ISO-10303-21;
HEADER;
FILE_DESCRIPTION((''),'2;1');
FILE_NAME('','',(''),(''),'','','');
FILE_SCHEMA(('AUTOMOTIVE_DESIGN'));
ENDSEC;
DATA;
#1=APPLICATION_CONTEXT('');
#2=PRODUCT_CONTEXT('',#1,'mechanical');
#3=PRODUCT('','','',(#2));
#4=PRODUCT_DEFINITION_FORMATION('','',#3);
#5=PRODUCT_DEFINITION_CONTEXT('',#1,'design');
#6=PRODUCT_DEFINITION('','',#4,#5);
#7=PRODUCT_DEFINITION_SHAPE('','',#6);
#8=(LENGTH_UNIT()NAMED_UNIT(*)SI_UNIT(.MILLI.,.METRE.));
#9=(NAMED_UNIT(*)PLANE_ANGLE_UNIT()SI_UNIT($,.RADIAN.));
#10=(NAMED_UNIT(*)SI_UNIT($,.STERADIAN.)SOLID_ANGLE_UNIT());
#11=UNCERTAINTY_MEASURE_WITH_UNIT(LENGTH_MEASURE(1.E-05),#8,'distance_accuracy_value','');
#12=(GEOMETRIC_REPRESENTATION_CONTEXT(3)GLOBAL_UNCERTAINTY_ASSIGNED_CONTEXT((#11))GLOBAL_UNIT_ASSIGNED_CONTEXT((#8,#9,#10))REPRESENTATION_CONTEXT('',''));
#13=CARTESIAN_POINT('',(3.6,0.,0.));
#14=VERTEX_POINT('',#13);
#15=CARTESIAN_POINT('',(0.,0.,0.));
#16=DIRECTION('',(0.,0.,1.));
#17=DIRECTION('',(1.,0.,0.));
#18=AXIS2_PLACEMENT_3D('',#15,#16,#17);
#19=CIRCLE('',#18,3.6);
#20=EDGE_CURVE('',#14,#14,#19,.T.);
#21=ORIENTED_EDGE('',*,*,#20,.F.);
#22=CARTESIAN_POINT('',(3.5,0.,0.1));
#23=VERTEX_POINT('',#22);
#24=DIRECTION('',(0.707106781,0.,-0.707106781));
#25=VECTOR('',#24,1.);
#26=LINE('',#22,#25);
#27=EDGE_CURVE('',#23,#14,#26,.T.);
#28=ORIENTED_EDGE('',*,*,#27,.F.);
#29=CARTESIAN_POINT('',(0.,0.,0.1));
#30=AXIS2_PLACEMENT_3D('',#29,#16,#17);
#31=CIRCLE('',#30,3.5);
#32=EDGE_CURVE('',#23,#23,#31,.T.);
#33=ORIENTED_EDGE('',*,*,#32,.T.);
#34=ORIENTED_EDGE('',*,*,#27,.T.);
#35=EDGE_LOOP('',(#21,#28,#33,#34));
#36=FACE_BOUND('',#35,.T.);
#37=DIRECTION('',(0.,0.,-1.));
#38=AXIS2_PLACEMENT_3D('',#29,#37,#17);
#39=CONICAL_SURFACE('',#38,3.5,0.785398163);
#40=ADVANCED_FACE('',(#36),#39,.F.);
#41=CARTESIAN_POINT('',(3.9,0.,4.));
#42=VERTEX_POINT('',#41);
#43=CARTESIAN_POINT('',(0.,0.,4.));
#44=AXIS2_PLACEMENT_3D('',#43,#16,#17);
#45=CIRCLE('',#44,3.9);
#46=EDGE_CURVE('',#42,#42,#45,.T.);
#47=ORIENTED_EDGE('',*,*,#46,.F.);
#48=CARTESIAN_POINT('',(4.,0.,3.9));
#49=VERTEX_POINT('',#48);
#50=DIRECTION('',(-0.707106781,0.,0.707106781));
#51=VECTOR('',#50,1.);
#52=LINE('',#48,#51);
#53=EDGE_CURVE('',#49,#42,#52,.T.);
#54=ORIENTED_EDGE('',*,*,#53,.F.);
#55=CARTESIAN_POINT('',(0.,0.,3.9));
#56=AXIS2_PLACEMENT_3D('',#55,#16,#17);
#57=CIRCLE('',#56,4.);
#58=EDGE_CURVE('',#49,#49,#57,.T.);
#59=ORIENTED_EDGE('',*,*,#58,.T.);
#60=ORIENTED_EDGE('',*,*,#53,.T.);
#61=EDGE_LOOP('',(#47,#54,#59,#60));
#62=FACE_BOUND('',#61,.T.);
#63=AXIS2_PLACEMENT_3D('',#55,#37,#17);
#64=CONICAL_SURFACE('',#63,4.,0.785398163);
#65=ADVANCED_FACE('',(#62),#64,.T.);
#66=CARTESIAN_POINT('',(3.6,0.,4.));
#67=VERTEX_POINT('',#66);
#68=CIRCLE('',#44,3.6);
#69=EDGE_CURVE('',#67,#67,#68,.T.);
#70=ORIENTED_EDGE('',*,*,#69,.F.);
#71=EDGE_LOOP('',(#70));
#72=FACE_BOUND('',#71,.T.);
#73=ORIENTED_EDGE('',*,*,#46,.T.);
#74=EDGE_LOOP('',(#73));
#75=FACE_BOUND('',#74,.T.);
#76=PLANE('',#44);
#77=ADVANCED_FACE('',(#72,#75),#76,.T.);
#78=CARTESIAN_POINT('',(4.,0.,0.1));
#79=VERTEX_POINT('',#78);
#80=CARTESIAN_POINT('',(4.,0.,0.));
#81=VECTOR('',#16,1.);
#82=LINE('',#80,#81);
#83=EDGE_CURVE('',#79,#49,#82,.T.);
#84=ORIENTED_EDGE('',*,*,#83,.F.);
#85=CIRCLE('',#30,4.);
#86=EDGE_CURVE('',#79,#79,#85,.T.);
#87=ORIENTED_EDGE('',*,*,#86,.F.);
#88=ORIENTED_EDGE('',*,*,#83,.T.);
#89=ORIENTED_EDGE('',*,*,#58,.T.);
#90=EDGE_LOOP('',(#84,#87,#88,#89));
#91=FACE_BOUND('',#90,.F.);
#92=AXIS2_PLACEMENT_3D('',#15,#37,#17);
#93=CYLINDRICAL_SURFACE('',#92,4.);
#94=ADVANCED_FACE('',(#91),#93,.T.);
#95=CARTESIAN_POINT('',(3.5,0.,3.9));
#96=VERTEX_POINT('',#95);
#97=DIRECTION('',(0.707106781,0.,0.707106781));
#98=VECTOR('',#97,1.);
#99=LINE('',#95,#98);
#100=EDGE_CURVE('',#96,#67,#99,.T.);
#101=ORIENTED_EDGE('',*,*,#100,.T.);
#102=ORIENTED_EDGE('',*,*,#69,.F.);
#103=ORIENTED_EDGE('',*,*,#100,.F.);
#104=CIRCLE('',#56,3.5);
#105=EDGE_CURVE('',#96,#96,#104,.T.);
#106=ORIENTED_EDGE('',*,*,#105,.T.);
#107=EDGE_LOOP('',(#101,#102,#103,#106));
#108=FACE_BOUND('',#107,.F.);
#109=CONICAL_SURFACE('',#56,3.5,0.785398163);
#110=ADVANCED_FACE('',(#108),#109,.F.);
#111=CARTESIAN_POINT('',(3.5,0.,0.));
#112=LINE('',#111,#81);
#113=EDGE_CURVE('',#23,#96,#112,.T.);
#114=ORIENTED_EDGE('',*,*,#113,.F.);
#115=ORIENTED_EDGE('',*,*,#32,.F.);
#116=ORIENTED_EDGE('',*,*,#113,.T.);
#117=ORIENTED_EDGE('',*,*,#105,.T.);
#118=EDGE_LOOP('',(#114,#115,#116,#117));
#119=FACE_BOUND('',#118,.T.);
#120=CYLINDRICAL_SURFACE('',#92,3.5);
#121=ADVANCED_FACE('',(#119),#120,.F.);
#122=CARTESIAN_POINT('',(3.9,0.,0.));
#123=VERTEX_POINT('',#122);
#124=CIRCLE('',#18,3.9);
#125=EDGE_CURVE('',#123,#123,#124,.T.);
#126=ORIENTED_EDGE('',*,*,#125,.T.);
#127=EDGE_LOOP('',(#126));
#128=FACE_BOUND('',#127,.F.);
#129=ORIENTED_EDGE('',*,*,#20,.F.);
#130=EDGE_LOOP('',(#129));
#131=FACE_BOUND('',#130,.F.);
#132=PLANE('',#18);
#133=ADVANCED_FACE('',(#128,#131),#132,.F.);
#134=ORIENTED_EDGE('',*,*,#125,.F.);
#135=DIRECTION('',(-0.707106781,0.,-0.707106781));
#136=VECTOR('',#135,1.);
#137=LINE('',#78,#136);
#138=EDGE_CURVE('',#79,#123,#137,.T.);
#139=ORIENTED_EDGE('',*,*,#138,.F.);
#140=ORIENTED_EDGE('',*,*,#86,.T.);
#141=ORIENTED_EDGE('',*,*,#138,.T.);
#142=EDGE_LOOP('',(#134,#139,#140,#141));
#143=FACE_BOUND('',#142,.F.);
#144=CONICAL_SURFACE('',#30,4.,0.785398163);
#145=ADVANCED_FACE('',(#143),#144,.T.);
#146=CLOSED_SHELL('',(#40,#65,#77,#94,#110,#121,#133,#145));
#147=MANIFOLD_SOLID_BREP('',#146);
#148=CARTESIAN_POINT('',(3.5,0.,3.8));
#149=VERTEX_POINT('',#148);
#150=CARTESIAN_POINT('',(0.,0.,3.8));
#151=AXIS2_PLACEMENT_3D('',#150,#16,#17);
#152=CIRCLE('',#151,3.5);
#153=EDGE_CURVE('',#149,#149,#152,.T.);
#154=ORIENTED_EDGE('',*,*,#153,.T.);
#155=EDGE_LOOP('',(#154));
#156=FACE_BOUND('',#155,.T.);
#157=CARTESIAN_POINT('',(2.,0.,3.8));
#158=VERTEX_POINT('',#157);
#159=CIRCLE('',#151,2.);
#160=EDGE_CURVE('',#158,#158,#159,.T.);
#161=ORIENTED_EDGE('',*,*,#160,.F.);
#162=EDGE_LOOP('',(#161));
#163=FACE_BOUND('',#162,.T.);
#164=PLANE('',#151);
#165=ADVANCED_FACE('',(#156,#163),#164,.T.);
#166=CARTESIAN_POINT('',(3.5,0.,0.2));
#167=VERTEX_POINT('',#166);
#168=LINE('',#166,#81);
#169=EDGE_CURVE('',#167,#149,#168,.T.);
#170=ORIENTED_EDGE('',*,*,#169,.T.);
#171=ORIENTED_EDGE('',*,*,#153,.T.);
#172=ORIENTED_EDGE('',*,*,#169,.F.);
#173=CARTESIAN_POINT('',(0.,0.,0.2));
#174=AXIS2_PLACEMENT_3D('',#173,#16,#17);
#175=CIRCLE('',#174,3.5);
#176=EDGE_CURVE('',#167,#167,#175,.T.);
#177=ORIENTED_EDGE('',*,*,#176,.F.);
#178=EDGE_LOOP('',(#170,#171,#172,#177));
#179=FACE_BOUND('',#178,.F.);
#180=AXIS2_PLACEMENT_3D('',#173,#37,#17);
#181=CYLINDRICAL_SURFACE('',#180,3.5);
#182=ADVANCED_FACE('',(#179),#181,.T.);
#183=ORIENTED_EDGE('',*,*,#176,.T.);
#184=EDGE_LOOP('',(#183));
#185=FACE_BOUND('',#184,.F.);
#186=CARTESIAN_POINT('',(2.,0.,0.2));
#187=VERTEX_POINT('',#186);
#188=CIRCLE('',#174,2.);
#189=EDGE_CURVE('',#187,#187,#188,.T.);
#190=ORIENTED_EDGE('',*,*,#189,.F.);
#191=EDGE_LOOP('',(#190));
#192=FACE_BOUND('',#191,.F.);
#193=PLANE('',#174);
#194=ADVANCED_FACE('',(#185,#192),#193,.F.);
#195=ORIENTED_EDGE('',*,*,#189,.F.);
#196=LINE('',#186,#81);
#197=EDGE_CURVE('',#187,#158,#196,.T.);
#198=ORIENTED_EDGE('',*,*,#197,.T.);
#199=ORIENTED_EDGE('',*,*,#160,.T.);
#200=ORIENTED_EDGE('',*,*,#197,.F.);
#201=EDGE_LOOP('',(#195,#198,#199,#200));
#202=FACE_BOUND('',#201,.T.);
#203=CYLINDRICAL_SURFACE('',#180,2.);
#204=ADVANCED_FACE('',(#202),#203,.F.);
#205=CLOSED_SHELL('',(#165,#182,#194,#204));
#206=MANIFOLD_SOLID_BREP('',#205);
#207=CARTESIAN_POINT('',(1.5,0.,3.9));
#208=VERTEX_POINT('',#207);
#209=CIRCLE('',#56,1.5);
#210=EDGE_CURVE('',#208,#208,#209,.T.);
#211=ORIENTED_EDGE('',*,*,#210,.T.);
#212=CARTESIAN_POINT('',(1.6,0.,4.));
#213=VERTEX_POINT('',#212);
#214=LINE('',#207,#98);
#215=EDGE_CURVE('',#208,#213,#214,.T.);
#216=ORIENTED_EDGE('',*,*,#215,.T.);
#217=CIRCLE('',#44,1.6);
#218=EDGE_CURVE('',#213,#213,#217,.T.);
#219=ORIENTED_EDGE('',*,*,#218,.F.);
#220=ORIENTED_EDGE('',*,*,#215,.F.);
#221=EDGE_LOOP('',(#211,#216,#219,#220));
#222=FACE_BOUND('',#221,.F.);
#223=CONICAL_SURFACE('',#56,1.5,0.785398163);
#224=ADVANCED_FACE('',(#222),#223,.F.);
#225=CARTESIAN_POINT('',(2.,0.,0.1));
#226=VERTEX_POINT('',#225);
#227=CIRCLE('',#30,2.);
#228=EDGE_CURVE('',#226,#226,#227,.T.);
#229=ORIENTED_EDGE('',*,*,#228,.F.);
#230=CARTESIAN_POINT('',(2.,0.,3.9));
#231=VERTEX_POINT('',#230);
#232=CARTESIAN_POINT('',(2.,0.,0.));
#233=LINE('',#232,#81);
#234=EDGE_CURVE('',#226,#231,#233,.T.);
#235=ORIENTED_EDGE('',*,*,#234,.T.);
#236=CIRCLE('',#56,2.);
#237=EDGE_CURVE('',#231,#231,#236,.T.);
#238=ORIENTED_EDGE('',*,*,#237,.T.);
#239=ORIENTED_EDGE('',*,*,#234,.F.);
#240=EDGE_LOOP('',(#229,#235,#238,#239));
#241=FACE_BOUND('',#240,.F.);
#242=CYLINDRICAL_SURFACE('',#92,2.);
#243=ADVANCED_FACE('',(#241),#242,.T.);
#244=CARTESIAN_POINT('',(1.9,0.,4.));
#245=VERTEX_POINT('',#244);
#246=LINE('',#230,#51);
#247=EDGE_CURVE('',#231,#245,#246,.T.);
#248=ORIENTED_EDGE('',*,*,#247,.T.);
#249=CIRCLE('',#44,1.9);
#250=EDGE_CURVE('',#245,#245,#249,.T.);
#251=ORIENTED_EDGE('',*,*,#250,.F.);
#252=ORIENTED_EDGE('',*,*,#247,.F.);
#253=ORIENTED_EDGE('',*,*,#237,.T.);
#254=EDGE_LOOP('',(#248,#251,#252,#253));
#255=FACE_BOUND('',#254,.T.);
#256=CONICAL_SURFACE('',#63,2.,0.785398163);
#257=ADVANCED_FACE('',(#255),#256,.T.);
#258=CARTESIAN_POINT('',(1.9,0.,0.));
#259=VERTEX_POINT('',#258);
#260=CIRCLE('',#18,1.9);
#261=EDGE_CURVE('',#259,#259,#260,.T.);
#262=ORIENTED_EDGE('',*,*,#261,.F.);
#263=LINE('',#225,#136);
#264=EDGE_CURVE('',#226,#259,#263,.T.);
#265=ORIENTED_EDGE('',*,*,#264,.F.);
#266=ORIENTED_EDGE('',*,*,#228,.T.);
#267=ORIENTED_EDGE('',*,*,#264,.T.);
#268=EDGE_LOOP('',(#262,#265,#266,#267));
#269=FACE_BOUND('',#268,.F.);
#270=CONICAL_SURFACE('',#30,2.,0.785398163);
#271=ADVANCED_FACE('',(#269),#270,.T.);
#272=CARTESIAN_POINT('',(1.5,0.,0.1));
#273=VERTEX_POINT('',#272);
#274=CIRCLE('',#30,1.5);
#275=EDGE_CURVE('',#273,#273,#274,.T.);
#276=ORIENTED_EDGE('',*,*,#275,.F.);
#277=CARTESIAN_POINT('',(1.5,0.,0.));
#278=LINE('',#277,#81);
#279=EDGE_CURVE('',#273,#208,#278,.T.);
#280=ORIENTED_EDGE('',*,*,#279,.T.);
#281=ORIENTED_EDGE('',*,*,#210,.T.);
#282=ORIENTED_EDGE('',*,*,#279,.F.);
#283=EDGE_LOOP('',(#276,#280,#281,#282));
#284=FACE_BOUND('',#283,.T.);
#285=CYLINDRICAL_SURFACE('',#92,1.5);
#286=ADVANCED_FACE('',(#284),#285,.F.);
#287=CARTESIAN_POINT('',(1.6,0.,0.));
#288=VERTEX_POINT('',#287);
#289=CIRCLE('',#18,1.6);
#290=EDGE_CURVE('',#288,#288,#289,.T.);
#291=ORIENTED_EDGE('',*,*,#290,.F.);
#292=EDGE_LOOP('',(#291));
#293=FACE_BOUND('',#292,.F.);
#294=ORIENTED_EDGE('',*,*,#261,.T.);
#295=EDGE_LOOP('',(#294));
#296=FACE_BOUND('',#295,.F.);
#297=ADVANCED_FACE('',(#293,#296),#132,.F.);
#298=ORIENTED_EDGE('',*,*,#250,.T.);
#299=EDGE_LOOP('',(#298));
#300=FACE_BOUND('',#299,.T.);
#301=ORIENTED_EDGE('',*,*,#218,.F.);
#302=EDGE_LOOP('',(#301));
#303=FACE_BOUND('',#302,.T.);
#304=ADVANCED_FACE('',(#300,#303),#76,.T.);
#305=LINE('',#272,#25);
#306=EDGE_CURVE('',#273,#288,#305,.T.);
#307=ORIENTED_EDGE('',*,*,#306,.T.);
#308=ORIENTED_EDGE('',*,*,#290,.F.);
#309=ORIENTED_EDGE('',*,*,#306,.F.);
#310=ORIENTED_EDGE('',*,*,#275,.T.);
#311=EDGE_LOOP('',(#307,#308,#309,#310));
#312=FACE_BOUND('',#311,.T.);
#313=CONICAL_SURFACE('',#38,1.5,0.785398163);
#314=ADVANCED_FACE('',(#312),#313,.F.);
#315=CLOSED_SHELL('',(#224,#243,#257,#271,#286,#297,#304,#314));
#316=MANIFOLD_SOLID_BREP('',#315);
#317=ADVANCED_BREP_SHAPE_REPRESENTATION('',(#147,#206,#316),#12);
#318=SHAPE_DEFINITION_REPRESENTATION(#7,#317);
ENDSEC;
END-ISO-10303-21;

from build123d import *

# Parameters (mm, degrees)
F0_R      = 2
F0_R_2    = 1.5
F1_DEPTH  = 4
F0_R_3    = 4
F0_R_4    = 3.5
F2_START  = 0.2
F2_DEPTH  = 3.6
F3_SIZE   = 0.1
F3_2_SIZE = 0.1


with BuildPart() as f1:
    # F0 (on Top) → F1 (new body)
    with BuildSketch(Plane.XY):
        Circle(F0_R)
        Circle(F0_R_2, mode=Mode.SUBTRACT)
    extrude(amount=F1_DEPTH)

    # F3
    f3_edges = [f1.edges().sort_by_distance(p)[0] for p in [
        (-2, 0, 0),
        (-1.5, 0, 0),
        (-2, 0, 4),
        (-1.5, 0, 4),
    ]]
    chamfer(f3_edges, length=F3_SIZE)


with BuildPart() as f1b:
    # F0 (on Top) → F1, piece 2 (new body)
    with BuildSketch(Plane.XY):
        Circle(F0_R_3)
        Circle(F0_R_4, mode=Mode.SUBTRACT)
    extrude(amount=F1_DEPTH)

    # F3#2
    f3_2_edges = [f1b.edges().sort_by_distance(p)[0] for p in [
        (-4, 0, 4),
        (-3.5, 0, 4),
        (-4, 0, 0),
        (-3.5, 0, 0),
    ]]
    chamfer(f3_2_edges, length=F3_2_SIZE)


with BuildPart() as f2:
    # F0 (on Top) → F2 (new body)
    with BuildSketch(Plane.XY.offset(F2_START)):
        Circle(F0_R_4)
        Circle(F0_R, mode=Mode.SUBTRACT)
    extrude(amount=F2_DEPTH)


solid = Compound([f1.part, f1b.part, f2.part])
